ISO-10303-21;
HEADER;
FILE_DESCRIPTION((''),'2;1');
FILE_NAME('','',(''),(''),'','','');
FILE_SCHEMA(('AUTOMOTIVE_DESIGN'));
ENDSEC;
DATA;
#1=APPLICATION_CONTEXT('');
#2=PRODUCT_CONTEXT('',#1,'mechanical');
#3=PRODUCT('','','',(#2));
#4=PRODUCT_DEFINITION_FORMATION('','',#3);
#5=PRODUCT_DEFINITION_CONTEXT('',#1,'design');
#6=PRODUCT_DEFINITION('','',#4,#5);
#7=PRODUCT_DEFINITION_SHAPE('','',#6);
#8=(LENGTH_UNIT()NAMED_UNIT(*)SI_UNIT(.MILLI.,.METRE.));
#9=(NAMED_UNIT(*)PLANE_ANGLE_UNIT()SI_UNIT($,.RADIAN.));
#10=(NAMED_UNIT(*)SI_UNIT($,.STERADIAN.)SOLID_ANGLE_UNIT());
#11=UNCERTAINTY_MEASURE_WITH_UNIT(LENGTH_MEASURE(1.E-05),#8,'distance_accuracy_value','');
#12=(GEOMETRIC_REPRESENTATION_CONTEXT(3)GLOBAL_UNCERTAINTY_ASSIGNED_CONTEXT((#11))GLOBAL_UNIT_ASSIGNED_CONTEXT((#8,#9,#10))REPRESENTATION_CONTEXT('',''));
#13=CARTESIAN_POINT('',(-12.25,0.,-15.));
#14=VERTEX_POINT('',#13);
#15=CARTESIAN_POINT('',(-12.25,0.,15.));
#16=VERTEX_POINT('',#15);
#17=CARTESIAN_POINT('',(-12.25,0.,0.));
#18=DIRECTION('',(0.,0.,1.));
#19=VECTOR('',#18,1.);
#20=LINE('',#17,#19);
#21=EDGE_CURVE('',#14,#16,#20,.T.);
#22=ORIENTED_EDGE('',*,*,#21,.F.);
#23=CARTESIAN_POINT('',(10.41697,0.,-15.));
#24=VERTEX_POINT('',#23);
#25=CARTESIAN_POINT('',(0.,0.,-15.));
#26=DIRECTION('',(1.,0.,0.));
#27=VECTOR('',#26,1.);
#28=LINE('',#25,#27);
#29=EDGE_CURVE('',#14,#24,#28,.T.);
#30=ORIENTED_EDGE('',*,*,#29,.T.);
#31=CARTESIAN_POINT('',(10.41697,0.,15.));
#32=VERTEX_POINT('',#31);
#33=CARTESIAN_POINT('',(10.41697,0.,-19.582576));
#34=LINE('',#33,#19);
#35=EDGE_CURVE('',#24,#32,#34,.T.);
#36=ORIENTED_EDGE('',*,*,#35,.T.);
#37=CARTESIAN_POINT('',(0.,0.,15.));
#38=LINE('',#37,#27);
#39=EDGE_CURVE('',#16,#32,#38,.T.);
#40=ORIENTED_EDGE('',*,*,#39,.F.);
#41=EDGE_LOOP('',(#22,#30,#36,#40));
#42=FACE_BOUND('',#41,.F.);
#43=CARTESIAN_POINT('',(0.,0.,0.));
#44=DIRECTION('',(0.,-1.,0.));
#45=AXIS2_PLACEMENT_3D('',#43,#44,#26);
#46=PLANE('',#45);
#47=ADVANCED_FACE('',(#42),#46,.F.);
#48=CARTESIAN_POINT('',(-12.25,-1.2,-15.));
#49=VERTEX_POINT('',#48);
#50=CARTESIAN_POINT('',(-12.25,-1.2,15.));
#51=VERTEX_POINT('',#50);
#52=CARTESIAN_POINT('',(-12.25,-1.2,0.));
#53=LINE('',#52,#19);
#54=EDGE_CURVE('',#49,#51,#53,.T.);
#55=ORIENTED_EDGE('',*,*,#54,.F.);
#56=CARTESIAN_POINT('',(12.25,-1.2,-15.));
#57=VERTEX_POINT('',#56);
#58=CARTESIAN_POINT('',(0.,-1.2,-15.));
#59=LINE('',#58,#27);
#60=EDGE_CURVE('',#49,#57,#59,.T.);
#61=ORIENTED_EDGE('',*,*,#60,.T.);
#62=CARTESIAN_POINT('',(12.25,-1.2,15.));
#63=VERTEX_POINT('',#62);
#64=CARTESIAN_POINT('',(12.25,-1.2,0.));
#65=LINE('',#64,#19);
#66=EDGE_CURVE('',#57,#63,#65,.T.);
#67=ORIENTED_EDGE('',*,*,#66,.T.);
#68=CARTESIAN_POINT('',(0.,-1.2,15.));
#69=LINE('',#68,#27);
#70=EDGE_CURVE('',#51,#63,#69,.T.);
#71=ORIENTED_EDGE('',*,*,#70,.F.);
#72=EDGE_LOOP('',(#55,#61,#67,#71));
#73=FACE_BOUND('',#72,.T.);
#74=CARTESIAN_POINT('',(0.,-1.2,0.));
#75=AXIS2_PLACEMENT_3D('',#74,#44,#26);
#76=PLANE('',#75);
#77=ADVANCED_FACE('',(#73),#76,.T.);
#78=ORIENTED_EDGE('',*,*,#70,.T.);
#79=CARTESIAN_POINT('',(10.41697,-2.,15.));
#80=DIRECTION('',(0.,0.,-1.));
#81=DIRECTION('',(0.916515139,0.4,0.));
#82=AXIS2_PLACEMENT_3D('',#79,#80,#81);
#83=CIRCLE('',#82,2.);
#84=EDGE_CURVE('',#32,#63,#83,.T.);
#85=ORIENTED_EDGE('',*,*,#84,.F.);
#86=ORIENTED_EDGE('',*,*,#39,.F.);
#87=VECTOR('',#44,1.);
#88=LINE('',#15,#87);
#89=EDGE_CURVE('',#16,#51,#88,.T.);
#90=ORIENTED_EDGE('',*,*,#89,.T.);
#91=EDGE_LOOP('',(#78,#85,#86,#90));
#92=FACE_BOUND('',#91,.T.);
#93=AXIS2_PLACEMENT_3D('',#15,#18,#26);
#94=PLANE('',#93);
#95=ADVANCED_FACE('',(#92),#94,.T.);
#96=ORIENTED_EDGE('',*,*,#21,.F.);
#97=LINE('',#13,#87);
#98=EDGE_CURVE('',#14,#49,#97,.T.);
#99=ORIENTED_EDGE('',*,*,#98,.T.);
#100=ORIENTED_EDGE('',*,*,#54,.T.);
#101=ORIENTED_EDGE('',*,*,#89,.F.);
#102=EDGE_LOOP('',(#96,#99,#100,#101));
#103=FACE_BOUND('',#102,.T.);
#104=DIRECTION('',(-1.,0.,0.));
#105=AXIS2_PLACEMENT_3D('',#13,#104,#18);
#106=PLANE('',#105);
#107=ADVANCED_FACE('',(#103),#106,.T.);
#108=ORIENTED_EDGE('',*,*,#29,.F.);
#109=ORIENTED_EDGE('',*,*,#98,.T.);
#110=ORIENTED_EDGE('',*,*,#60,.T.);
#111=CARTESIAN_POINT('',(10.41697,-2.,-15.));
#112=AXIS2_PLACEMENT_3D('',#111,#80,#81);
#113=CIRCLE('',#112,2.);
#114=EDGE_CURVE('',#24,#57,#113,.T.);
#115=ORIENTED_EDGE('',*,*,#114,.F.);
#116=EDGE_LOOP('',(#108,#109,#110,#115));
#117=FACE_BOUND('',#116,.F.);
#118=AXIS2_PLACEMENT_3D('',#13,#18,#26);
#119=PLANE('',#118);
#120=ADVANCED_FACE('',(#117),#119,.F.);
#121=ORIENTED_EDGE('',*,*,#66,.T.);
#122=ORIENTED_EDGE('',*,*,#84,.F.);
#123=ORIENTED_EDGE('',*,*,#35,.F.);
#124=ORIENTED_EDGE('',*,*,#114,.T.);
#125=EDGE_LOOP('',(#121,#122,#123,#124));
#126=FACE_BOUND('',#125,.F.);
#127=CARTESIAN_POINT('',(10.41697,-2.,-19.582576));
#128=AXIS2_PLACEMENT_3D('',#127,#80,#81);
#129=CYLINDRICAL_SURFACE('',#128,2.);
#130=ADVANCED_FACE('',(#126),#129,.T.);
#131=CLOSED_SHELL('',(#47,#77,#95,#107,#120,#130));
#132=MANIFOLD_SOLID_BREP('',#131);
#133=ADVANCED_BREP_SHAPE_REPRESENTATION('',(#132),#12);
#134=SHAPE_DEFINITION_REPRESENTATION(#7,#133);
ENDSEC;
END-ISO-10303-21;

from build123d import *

# Parameters (mm, degrees)
F0_W        = 24.5
F0_H        = 30
F1_DEPTH    = 1.2
F2_T1_DEPTH = 39.1651513899


# Not quite as in the source:
# - a fillet or chamfer that OpenCascade refuses, or shapes differently, is made with other operations: its cross-section is extruded or revolved along the edge and cut away or added


with BuildPart() as f1:
    # F0 (on Front) → F1 (new body)
    with BuildSketch(Plane.XZ):
        Rectangle(F0_W, F0_H)
    extrude(amount=F1_DEPTH)

    # F2: fillet of radius 2 on 1 edges, made by hand

    # F2_s2 → F2_t1 (cut)
    with BuildSketch(Plane.XY.offset(-19.582575695)):
        with BuildLine():
            ThreePointArc((12.25, -1.2), (11.512414837, -0.3266799469), (10.416969722, 0))
            Line((10.416969722, 0), (12.25, 0))
            Line((12.25, 0), (12.25, -1.2))
        make_face()
    extrude(amount=F2_T1_DEPTH, mode=Mode.SUBTRACT)


solid = f1.part
